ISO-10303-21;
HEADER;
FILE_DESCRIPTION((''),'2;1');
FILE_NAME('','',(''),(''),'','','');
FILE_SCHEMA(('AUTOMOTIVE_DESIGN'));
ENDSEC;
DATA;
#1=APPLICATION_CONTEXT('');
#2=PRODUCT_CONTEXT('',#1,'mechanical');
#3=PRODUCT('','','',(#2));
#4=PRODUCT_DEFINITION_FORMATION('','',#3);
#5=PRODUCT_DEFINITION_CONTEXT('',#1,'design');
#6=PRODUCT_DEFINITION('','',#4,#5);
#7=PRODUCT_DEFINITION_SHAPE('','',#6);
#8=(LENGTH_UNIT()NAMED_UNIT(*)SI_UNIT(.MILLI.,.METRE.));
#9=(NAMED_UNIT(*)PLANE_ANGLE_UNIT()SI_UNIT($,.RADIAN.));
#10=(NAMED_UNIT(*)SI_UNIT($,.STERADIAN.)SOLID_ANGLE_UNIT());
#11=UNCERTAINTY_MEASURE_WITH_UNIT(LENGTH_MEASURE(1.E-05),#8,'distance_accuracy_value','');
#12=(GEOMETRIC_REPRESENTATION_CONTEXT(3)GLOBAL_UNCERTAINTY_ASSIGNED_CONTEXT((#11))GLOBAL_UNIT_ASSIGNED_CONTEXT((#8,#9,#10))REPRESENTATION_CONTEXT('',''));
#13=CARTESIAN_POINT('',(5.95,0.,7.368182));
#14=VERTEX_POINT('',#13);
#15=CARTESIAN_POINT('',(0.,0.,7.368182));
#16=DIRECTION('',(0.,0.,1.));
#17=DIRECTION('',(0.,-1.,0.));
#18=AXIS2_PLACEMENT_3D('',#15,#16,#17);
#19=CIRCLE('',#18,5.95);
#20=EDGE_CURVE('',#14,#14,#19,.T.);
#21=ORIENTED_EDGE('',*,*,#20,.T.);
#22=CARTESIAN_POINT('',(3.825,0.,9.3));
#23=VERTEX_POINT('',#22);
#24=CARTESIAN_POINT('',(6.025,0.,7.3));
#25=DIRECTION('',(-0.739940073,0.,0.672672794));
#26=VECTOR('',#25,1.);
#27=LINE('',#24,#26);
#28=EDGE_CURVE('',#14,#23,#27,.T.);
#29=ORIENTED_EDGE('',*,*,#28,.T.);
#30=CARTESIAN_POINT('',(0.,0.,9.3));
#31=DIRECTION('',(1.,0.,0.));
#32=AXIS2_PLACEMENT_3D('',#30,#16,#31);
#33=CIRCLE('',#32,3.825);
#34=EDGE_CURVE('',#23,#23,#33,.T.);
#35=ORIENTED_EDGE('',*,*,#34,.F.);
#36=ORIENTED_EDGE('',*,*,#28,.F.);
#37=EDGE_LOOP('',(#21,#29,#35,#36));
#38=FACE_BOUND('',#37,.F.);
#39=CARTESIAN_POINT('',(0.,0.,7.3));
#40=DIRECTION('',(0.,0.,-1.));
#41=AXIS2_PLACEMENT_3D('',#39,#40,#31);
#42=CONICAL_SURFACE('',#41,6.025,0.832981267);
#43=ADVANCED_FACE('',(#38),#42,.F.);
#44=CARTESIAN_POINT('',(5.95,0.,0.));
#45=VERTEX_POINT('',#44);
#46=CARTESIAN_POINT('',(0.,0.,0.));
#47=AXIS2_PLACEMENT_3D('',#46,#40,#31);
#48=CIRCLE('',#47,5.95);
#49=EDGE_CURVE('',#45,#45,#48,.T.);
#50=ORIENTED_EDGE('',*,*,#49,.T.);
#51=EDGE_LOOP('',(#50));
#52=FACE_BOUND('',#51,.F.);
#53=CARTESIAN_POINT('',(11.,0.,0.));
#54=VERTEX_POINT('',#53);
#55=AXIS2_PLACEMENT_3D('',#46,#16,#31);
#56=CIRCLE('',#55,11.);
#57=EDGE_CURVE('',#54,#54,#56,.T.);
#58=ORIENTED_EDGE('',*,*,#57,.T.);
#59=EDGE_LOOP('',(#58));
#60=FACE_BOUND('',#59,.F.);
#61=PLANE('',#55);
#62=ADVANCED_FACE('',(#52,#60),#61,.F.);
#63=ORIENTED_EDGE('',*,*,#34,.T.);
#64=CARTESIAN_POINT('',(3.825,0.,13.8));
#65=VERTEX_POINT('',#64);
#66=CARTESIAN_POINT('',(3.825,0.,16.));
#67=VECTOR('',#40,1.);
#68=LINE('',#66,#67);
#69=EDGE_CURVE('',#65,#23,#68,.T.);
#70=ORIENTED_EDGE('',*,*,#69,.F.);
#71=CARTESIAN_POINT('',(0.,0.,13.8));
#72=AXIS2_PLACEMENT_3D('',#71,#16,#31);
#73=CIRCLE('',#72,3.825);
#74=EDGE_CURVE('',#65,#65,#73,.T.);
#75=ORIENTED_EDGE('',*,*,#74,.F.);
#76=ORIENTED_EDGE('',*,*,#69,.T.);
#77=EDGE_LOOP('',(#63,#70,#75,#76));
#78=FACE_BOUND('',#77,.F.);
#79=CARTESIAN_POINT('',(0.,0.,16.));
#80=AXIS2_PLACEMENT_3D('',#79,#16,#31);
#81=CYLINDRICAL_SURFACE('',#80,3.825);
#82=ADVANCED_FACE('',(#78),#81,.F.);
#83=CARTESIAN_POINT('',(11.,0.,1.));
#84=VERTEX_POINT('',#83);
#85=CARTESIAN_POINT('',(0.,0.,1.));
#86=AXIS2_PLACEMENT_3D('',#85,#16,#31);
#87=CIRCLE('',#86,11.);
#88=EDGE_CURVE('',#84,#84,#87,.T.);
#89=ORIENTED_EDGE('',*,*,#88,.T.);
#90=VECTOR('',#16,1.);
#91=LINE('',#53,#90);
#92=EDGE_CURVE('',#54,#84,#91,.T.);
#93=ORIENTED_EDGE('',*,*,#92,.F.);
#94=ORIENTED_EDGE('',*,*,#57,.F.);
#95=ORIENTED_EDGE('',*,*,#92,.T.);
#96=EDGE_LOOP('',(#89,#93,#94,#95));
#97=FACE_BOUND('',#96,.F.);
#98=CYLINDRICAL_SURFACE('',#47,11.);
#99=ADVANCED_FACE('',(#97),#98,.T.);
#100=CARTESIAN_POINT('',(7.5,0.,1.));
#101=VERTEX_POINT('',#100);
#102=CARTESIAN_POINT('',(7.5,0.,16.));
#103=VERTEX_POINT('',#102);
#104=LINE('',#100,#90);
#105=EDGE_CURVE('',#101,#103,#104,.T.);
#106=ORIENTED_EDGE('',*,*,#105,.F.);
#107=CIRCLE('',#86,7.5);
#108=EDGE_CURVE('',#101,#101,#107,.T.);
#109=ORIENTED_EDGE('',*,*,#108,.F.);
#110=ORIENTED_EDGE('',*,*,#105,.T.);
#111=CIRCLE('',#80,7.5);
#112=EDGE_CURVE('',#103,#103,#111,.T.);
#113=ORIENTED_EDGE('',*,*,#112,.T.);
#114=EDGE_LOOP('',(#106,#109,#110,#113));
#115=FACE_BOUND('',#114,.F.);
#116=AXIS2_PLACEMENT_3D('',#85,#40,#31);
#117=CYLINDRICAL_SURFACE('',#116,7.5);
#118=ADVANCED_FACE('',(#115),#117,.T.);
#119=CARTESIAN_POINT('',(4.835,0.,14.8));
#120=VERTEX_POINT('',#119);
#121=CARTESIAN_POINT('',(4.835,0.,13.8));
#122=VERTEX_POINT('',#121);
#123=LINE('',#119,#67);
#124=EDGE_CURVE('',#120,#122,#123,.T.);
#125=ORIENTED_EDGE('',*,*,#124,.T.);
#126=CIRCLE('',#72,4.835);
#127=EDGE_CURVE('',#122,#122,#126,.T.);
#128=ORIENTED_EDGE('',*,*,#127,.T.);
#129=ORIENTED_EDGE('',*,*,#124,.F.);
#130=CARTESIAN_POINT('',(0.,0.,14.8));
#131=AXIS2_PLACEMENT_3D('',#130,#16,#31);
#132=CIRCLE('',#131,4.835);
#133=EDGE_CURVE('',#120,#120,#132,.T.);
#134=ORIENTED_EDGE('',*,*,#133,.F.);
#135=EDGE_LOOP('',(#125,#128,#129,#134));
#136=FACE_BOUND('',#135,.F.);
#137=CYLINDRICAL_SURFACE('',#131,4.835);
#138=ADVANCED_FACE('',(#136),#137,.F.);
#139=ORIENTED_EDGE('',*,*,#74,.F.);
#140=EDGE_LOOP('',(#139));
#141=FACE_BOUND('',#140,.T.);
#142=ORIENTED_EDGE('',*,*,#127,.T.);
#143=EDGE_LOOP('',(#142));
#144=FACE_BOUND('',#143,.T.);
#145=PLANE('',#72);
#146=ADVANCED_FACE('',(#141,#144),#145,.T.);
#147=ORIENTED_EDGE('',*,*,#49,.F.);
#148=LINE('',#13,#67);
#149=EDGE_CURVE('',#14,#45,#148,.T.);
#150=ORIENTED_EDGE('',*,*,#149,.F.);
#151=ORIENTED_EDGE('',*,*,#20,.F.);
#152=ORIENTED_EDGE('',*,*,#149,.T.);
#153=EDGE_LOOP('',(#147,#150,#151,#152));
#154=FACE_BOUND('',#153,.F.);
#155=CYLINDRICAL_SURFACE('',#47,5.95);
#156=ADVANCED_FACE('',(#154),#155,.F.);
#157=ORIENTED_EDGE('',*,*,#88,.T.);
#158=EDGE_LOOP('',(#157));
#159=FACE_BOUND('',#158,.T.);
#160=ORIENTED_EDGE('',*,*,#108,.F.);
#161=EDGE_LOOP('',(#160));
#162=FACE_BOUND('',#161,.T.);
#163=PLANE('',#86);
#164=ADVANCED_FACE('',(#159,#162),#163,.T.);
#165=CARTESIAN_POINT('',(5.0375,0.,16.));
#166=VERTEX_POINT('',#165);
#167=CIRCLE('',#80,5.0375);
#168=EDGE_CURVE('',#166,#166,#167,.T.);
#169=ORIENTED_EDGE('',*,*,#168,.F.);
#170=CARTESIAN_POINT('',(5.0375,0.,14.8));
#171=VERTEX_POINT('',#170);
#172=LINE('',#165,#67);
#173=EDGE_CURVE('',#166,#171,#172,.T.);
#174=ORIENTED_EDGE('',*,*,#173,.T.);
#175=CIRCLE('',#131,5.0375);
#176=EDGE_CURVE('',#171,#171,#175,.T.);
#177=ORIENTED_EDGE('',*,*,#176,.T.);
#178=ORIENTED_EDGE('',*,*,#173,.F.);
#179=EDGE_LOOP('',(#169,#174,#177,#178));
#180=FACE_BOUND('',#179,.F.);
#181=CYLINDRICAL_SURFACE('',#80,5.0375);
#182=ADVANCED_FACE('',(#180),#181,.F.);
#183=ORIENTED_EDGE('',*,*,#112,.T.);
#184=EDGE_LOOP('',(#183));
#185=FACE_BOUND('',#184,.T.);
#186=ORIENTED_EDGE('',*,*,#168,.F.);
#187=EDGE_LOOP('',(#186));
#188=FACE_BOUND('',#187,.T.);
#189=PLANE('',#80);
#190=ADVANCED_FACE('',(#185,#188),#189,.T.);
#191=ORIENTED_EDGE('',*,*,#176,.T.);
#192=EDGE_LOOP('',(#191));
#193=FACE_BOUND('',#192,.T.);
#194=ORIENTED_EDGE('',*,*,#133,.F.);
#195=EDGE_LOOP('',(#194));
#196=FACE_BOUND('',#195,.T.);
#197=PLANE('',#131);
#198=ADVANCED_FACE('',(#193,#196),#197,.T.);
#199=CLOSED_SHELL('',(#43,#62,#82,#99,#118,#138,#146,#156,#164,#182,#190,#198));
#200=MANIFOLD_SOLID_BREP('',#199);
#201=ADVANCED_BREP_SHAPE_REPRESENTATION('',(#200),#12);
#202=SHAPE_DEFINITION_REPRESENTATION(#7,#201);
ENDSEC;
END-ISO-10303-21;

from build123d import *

# Parameters (mm, degrees)
F0_R         = 11
F1_DEPTH     = 1
F2_R         = 7.5
F3_DEPTH     = 15
F4_R         = 3.825
F5_DEPTH     = 25
F6_R         = 5.95
F7_DEPTH     = 7.3
F8_R         = 5.0375
F8_R_2       = 3.825
F9_DEPTH     = 1.2
F10_S5_R     = 5.95
F10_T6_DEPTH = 10
F11_R        = 4.834999796
F11_R_2      = 3.825
F12_DEPTH    = 1


# Not quite as in the source:
# - a fillet or chamfer that OpenCascade refuses, or shapes differently, is made with other operations: its cross-section is extruded or revolved along the edge and cut away or added


with BuildPart() as f1:
    # F0 (on Top) → F1 (new body)
    with BuildSketch(Plane.XY):
        Circle(F0_R)
    extrude(amount=F1_DEPTH)

    # F2 (on face) → F3 (join)
    with BuildSketch(Plane.XY.offset(1)):
        Circle(F2_R)
    extrude(amount=F3_DEPTH)

    # F4 (on face) → F5 (cut)
    with BuildSketch(Plane.XY.offset(16)):
        Circle(F4_R)
    extrude(amount=-F5_DEPTH, mode=Mode.SUBTRACT)

    # F6 (on face) → F7 (cut)
    with BuildSketch(Plane(origin=(0, 0, 0), x_dir=(1, 0, 0), z_dir=(0, 0, -1))):
        Circle(F6_R)
    extrude(amount=-F7_DEPTH, mode=Mode.SUBTRACT)

    # F8 (on face) → F9 (cut)
    with BuildSketch(Plane.XY.offset(16)):
        Circle(F8_R)
        Circle(F8_R_2, mode=Mode.SUBTRACT)
    extrude(amount=-F9_DEPTH, mode=Mode.SUBTRACT)

    # F10: chamfer of 2.2 x 2 on 1 edges, made by hand


with BuildPart() as f10_tool2:
    # F10_s3 → F10_t4 (revolve)
    with BuildSketch(Plane.XZ):
        Polygon((6.025, 7.3), (3.825, 9.3), (3.825, 7.3), align=None)
    revolve(axis=Axis((0, 0, 7.3), (0, 0, 1)))

    # F10_s5 → F10_t6 (intersect, symmetric)
    with BuildSketch(Plane.XY.offset(8.3)):
        Circle(F10_S5_R)
    extrude(amount=F10_T6_DEPTH, both=True, mode=Mode.INTERSECT)


with BuildPart() as f1_1:
    add(f1.part)

    # F10_t1: cut F10_tool2
    add(f10_tool2.part, mode=Mode.SUBTRACT)

    # F11 (on face) → F12 (cut)
    with BuildSketch(Plane.XY.offset(14.8)):
        Circle(F11_R)
        Circle(F11_R_2, mode=Mode.SUBTRACT)
    extrude(amount=-F12_DEPTH, mode=Mode.SUBTRACT)


solid = f1_1.part
